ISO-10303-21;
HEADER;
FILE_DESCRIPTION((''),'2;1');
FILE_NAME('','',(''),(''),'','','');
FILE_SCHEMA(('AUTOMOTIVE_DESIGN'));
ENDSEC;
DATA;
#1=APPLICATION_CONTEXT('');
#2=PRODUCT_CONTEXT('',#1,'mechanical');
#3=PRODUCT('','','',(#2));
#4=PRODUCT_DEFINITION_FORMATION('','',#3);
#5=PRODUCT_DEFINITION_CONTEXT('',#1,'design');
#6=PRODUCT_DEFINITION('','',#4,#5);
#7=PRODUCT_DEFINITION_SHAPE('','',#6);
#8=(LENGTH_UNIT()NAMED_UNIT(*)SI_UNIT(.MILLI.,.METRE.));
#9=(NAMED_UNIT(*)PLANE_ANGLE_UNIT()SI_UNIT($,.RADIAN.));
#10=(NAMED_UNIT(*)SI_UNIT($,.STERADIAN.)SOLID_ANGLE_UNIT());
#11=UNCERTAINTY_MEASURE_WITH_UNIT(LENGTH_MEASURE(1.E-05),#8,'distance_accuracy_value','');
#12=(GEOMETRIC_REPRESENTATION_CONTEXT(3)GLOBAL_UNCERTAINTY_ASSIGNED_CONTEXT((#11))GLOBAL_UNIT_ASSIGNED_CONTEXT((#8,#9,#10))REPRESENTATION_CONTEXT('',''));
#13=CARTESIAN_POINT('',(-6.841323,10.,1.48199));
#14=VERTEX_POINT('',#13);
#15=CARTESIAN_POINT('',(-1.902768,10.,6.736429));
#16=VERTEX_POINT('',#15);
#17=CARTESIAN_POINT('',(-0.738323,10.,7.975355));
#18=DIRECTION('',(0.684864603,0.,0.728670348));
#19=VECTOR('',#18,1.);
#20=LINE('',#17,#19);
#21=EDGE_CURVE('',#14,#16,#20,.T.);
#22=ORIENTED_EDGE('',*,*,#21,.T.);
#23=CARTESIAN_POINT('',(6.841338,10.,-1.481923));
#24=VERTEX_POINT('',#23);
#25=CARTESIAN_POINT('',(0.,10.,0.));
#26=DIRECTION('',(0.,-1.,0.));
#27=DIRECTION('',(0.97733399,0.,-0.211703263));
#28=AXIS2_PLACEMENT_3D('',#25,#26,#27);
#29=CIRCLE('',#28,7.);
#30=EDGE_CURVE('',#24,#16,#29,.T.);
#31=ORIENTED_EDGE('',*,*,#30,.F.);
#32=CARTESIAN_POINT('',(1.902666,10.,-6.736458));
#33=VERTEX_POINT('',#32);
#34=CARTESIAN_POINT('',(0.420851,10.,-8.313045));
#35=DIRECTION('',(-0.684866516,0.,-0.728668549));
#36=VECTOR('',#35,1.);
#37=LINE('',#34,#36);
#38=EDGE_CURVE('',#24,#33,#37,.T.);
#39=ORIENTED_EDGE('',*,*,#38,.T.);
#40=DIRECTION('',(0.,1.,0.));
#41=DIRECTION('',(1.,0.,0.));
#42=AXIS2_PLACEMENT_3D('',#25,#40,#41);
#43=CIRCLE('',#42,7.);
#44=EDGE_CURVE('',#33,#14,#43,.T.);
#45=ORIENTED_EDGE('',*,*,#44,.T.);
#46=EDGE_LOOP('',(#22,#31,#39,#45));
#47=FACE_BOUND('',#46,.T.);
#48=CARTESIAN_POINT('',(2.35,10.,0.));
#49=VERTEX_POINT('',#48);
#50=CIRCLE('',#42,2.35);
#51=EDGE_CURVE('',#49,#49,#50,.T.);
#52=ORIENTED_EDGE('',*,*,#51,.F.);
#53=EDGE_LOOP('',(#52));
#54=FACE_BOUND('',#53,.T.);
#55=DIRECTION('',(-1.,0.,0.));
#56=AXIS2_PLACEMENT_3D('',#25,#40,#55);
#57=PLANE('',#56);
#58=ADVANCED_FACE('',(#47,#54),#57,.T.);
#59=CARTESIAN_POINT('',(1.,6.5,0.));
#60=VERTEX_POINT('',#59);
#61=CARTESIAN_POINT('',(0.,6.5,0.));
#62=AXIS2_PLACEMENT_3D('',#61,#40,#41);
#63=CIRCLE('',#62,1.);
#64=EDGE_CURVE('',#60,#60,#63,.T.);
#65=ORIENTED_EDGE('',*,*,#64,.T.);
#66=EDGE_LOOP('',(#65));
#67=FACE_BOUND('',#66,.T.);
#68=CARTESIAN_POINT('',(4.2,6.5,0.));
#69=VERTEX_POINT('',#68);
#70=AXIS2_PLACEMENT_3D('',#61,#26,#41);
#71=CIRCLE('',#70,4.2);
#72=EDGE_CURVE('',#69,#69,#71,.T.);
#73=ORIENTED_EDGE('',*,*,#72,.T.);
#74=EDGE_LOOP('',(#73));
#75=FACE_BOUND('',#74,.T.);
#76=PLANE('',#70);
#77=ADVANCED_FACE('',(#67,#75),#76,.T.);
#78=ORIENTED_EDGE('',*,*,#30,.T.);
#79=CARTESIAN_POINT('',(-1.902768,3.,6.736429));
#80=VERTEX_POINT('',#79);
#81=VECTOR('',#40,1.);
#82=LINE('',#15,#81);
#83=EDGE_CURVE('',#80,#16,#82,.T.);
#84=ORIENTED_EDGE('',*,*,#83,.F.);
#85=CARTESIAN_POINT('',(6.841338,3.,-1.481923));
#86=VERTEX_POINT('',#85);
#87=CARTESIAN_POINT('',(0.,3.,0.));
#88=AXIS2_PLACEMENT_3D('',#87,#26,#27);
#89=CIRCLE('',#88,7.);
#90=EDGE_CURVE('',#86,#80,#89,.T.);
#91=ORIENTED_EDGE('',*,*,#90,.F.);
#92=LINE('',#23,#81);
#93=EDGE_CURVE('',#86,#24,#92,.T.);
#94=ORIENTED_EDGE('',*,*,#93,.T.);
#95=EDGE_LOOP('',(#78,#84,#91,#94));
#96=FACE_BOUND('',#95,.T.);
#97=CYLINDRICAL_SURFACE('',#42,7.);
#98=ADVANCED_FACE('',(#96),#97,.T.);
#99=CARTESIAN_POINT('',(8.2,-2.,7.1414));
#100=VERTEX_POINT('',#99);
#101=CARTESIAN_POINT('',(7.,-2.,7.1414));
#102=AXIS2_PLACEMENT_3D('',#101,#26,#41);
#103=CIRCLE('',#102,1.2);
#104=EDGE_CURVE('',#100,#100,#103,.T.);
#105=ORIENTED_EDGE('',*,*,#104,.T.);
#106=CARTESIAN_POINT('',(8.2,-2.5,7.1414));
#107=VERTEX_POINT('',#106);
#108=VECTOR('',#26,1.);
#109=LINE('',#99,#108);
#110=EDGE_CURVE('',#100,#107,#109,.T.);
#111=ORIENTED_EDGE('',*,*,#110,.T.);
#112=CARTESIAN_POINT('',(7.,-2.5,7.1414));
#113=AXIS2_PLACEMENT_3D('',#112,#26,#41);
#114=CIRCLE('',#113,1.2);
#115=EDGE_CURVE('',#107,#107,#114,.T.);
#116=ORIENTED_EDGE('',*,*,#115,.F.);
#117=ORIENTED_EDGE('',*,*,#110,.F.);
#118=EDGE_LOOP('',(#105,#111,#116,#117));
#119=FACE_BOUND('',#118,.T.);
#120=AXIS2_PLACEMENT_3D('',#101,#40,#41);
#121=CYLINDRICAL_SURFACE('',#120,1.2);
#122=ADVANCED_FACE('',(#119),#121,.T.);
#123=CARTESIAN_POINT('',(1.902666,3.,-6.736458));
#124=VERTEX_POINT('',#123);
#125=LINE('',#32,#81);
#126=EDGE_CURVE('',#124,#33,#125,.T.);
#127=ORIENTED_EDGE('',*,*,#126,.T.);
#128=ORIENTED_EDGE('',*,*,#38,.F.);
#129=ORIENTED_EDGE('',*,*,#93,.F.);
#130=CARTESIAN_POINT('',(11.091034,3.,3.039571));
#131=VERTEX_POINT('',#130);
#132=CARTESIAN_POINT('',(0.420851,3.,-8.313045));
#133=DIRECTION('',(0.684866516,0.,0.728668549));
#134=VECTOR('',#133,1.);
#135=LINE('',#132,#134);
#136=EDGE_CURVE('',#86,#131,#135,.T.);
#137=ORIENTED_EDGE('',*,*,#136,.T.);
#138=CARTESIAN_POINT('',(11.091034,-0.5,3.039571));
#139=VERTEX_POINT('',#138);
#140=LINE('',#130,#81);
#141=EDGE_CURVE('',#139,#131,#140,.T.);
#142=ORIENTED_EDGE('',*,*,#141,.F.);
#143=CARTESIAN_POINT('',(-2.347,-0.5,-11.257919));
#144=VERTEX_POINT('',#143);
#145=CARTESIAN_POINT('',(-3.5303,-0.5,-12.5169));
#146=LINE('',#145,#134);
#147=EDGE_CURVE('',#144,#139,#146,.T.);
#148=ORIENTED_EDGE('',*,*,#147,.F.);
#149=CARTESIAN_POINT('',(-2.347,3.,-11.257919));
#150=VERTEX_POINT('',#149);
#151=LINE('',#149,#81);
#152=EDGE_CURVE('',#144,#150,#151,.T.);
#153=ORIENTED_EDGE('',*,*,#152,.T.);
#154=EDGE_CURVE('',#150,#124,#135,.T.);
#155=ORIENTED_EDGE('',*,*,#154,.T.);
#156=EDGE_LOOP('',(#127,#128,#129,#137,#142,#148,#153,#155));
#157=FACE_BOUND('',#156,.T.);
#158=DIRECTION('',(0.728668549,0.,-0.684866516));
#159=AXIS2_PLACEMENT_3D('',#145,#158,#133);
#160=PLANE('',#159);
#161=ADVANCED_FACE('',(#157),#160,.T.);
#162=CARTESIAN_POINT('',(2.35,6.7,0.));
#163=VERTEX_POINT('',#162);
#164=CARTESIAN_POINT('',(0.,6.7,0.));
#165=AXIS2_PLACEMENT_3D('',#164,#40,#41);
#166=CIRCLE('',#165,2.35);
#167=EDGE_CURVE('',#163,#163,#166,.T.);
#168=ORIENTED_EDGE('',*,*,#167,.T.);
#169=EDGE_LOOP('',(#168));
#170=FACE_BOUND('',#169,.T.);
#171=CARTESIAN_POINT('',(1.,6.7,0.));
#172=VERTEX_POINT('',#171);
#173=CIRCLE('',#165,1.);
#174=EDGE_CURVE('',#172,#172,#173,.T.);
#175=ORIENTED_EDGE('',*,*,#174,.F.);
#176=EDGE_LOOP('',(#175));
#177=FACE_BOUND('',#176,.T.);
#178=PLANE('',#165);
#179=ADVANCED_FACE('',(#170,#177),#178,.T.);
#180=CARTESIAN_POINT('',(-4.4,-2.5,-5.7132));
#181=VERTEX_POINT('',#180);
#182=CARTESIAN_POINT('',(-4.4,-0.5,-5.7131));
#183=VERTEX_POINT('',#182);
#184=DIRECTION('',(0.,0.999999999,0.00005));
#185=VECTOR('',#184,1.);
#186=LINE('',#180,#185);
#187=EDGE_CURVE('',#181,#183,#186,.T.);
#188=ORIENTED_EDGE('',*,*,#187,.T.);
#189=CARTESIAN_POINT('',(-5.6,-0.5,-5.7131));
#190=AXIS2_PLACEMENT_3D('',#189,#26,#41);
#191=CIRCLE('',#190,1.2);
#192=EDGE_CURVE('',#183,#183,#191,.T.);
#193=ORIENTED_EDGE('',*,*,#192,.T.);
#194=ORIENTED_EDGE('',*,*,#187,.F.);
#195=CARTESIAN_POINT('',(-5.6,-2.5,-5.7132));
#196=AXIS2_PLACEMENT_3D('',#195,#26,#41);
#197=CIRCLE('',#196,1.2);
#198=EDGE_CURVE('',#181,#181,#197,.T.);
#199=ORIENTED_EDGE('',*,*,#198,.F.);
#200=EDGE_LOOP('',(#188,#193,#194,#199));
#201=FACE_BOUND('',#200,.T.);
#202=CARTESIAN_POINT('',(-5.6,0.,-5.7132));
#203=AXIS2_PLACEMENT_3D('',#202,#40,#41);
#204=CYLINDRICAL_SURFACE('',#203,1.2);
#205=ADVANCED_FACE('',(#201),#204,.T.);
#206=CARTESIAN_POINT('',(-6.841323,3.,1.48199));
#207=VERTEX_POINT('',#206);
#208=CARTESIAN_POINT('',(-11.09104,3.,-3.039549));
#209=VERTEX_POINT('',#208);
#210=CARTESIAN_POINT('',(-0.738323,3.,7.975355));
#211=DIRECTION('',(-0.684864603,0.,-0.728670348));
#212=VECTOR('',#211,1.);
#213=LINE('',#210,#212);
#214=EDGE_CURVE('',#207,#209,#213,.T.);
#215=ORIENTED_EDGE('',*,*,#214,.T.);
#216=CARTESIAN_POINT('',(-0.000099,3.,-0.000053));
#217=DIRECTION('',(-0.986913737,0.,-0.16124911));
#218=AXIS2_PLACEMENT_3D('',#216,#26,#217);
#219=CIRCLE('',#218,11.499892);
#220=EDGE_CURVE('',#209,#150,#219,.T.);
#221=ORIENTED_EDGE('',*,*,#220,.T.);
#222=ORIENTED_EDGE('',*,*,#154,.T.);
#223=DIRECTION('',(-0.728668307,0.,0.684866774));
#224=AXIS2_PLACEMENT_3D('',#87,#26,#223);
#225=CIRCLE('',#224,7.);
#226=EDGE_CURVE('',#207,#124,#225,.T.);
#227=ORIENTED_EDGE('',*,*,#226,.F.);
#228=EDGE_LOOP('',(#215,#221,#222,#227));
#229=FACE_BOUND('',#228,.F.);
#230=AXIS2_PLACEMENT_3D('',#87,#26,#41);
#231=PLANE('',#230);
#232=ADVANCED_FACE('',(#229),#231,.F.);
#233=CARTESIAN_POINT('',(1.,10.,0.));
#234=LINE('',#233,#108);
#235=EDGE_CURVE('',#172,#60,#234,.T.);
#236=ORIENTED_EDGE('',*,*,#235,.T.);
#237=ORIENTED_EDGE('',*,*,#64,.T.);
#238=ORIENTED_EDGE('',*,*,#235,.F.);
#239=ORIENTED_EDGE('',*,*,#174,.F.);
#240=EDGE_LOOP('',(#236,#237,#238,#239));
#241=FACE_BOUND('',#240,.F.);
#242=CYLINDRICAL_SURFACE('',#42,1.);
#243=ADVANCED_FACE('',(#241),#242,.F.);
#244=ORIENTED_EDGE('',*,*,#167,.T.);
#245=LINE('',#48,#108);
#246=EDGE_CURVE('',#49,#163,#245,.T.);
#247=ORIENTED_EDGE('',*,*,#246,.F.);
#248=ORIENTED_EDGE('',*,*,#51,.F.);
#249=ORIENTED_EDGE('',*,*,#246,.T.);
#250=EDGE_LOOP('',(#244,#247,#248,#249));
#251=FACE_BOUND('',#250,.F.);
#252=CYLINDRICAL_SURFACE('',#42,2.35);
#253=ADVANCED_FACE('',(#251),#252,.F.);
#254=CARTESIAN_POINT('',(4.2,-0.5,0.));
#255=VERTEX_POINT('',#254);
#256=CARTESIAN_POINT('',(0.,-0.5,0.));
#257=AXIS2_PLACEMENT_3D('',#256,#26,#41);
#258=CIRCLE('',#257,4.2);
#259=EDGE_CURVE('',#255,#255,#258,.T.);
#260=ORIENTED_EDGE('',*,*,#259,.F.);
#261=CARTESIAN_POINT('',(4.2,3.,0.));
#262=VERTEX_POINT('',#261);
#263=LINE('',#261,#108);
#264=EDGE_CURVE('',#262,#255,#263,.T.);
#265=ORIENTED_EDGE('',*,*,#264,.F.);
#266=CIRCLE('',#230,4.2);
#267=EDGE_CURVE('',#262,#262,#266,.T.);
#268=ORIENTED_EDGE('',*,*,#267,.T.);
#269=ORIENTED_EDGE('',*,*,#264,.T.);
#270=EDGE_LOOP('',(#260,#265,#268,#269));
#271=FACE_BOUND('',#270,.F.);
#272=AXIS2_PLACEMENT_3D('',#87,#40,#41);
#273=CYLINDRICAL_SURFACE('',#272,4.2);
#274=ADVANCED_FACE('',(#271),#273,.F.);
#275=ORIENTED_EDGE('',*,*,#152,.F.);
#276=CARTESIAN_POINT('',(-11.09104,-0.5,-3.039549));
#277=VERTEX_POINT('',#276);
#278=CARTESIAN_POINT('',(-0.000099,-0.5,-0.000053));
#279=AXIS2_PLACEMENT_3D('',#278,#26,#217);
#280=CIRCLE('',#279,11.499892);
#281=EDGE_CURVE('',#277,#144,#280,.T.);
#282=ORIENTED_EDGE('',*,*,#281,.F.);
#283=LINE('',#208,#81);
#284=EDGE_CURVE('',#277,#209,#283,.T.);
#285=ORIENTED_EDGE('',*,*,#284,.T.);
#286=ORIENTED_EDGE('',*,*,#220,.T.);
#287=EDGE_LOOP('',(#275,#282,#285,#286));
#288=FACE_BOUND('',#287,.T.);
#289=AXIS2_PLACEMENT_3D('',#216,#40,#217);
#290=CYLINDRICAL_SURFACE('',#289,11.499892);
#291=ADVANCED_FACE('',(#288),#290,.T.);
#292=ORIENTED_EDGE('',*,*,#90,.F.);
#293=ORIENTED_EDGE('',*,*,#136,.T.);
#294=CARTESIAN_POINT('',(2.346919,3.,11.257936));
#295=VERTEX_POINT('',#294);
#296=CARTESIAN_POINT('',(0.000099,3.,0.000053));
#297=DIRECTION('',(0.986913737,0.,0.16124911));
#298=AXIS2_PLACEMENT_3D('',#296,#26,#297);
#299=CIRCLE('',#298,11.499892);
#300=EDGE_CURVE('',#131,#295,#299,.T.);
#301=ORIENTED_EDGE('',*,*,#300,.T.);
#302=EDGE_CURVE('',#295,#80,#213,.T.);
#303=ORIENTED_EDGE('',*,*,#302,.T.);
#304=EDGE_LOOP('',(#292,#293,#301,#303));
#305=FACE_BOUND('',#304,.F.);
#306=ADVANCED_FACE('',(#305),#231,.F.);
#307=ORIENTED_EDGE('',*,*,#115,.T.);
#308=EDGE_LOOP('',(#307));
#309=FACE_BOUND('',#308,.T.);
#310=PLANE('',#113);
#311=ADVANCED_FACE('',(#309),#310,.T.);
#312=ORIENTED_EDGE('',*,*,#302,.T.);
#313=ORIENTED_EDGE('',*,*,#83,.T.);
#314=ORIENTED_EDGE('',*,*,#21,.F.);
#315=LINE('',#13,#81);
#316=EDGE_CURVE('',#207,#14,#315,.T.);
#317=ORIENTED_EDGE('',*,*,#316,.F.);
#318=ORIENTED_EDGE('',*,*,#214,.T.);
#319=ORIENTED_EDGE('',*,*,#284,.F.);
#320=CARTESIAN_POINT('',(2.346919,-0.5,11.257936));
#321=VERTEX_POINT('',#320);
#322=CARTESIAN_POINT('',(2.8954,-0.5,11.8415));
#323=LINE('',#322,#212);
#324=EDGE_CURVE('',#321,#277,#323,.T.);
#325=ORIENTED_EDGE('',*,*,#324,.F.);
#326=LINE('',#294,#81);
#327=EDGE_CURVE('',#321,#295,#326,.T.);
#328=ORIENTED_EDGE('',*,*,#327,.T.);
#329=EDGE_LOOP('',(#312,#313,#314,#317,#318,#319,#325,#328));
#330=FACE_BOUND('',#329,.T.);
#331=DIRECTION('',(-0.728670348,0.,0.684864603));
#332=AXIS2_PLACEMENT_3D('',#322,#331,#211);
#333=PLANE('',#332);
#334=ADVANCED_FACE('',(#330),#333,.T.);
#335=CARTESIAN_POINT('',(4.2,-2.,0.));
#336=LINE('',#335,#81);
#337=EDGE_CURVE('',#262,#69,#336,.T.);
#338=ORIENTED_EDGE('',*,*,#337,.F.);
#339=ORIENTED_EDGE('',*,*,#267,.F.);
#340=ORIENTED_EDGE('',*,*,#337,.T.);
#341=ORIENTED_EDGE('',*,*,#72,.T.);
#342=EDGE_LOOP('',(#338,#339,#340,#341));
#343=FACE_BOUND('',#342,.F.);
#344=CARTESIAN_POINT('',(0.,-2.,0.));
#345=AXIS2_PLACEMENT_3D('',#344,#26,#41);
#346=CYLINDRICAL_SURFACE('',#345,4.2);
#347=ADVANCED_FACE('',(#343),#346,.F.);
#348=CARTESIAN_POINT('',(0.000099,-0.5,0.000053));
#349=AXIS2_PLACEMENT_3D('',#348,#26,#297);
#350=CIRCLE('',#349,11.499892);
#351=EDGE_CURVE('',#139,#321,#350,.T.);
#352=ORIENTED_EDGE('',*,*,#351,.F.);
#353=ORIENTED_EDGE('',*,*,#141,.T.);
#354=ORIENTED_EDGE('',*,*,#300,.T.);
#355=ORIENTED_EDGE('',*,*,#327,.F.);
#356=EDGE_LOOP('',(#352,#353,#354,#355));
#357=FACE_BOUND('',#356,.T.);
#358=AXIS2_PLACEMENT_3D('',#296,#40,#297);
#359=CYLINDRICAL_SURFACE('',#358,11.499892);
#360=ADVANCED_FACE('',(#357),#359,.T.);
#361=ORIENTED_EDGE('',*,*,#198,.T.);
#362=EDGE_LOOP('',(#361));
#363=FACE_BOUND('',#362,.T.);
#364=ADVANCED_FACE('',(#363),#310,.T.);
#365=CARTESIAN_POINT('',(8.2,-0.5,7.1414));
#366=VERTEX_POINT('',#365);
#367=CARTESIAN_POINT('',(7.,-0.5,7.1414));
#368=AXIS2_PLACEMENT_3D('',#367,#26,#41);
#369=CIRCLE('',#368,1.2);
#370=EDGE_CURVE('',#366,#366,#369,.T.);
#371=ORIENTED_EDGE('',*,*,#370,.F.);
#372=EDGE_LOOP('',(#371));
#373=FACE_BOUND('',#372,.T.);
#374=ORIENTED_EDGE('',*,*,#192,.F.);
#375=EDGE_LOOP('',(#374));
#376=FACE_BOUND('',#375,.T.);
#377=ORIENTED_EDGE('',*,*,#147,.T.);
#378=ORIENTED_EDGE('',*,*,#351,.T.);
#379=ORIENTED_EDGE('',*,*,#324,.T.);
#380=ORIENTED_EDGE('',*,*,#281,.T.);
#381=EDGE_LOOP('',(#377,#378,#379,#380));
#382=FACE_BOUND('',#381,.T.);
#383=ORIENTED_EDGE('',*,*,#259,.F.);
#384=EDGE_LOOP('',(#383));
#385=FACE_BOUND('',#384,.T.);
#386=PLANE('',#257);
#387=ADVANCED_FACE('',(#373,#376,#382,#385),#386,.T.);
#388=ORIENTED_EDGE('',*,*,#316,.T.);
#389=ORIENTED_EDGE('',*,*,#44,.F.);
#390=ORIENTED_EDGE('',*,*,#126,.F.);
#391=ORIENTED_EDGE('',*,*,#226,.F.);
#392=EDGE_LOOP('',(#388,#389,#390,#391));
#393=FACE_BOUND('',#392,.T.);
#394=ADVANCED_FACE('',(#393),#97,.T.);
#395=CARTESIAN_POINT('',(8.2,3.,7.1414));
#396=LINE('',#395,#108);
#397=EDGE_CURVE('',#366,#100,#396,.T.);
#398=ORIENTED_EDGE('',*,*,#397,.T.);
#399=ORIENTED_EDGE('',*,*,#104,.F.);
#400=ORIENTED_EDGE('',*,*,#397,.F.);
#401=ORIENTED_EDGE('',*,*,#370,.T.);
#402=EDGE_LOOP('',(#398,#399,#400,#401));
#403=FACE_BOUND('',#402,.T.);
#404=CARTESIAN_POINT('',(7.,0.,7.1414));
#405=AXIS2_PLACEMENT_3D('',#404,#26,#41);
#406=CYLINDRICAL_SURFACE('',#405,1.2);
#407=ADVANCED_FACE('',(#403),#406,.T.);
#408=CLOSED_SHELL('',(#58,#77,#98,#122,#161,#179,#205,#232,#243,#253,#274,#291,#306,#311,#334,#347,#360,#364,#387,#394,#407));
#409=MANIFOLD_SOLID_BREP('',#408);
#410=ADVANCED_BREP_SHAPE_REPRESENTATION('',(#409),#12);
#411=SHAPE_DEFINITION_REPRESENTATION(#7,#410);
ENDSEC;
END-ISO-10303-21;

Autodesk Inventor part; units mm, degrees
ref_plane "YZ Plane" through (0, 0, 0) normal (1, 0, 0) x (0, 1, 0)
ref_plane "XZ Plane" through (0, 0, 0) normal (0, 1, 0) x (-1, 0, 0)
ref_plane "XY Plane" through (0, 0, 0) normal (0, 0, 1) x (1, 0, 0)
sketch "Skizze1" plane through (0, 0, 0) normal (0, 1, 0) x (-1, 0, 0)
  circle A0 centre (0, 0) radius 15
  dimension "d0" = 30
extrude "Extrusion1" add sketch "Skizze1" along normal blind 10
sketch "Skizze2" plane through (0, 0, 0) normal (0, -1, 0) x (1, 0, 0)
  line L0 (14.3188, 0.9) -> (12.9688, 0.9)
  line L1 (12.9688, -0.9) -> (14.3188, -0.9)
  line L2 (14.3188, -0.9) -> (14.3188, 0.9)
  line L3 (-21.3175, 0) -> (21.3175, 0) projected
  arc A0 (12.9688, 0.9) -> (0.9, 12.9688) centre (0, 0) ccw
  line L4 (-0.9, -12.9688) -> (-0.9, -14.3188)
  line L5 (-0.9, -14.3188) -> (0.9, -14.3188)
  line L6 (0.9, -14.3188) -> (0.9, -12.9688)
  line L7 (-12.9688, 0.9) -> (-14.3188, 0.9)
  line L8 (-14.3188, 0.9) -> (-14.3188, -0.9)
  line L9 (-14.3188, -0.9) -> (-12.9688, -0.9)
  line L10 (-0.9, 12.9688) -> (-0.9, 14.3188)
  line L11 (-0.9, 14.3188) -> (0.9, 14.3188)
  line L12 (0.9, 14.3188) -> (0.9, 12.9688)
  line L13 (0, -21.3175) -> (0, 21.3175) projected
  line L14 (-21.3175, 0) -> (21.3175, 0) projected
  arc A1 (0.9, -12.9688) -> (12.9688, -0.9) centre (0, 0) ccw
  arc A2 (-12.9688, -0.9) -> (-0.9, -12.9688) centre (0, 0) ccw
  arc A3 (-0.9, 12.9688) -> (-12.9688, 0.9) centre (0, 0) ccw
  circle A4 centre (0, 0) radius 4.2
  circle A5 centre (7, 7.1414) radius 1.2
  circle A6 centre (-5.6, -5.7131) radius 1.2
  dimension "d4" = 0.9
  dimension "d5" = 0.9
  dimension "d8" = 1.35
  dimension "d9" = 1.35
  dimension "d10" = 1.8
  dimension "d11" = 0.9
  dimension "d12" = 1.35
  dimension "d13" = 1.8
  dimension "d14" = 0.9
  dimension "d15" = 0.9
  dimension "d16" = 1.35
  dimension "d17" = 8.4
  dimension "d18" = 2.4
  dimension "d19" = 2.4
  dimension "d20" = 8
  dimension "d21" = 10
  dimension "d22" = 7
  dimension "d23" = 5.6
  dimension "d50" = 13
  dimension "d51" = 13
  dimension "d52" = 1.35
  dimension "d53" = 1.35
  dimension "d54" = 1.35
extrude "Extrusion2" cut sketch "Skizze2" against normal blind 3 contours L2 L3 A4 L13 L11 L12 A0 L0 | L2 L1 A1 L6 L5 L13 A4 L3 | A4 L3 L8 L7 A3 L10 L11 L13 | L13 L5 L4 A2 L9 L8 L3 A4
sketch "Skizze4" plane through (7, 0, 7.1414) normal (0, -1, 0) x (1, 0, 0)
  circle A0 centre (-7, -7.1414) radius 4.2
  circle A1 centre (-12.6, -12.8546) radius 1.2
  circle A2 centre (0, 0) radius 1.2
  line L0 (-7, -28.1414) -> (-7, 13.8586) projected
  dimension "d26" = 2.4
  dimension "d27" = 5.6
  dimension "d28" = 8
  dimension "d44" = 8.4
  dimension "d45" = 2.4
extrude "Extrusion3" add sketch "Skizze4" along normal blind 2
sketch "Skizze5" plane through (0, 10, 0) normal (0, 1, 0) x (1, 0, 0)
  circle A0 centre (0, 0) radius 19.262
  circle A1 centre (0, 0) radius 7
  dimension "d31" = 14
extrude "Extrusion4" cut sketch "Skizze5" against normal blind 7
fillet "Rundung1" radius 1 8 edges at (12.9688, 1.5, -0.9) (12.9688, 1.5, 0.9) (0.9, 1.5, -12.9688) (-0.9, 1.5, -12.9688) (-12.9688, 1.5, -0.9) (-12.9688, 1.5, 0.9) (-0.9, 1.5, 12.9688) (0.9, 1.5, 12.9688)
sketch "Skizze8" plane through (0, 10, 0) normal (0, 1, 0) x (1, 0, 0)
  circle A0 centre (0, 0) radius 1
  dimension "d46" = 2
extrude "Extrusion7" cut sketch "Skizze8" against normal blind 7
sketch "Skizze9" plane through (0, -2, 0) normal (0, -1, 0) x (1, 0, 0)
  line L0 (18.2687, 9.2162) -> (-7.478, -18.1772)
  line L1 (-7.478, -18.1772) -> (18.2687, -18.1772)
  line L2 (18.2687, -18.1772) -> (18.2687, 9.2162)
  line L3 (8.0673, 18.8043) -> (-17.6793, -8.5891)
  line L4 (-17.6793, -8.5891) -> (-17.6793, 18.8043)
  line L5 (-17.6793, 18.8043) -> (8.0673, 18.8043)
  point P0 (0, 0)
  dimension "d55" = 7
  dimension "d56" = 7
extrude "Extrusion8" cut sketch "Skizze9" against normal blind 50
sketch "Skizze10" plane through (0, -2, 0) normal (0, -1, 0) x (1, 0, 0)
  circle A0 centre (0, 0) radius 11.5
  circle A1 centre (0, 0) radius 18.9246
  dimension "d61" = 23
extrude "Extrusion9" cut sketch "Skizze10" against normal blind 10
sketch "Skizze11" plane through (0, -2, 0) normal (0, -1, 0) x (1, 0, 0)
  circle A0 centre (0, 0) radius 1 projected
  circle A1 centre (0, 0) radius 4.2
extrude "Extrusion10" cut sketch "Skizze11" against normal blind 8.5 contours A0 | A1
sketch "Skizze13" plane through (0, 3, 0) normal (0, -1, 0) x (1, 0, 0)
  circle A0 centre (7, 7.1414) radius 1.2 projected
  circle A1 centre (7, 7.1414) radius 1.2
  circle A2 centre (-5.6, -5.7131) radius 1.2 projected
  circle A3 centre (-5.6, -5.7131) radius 1.2
  arc A4 (11.3495, 1.8544) -> (1.1481, 11.4425) centre (0, 0) ccw
  line L0 (11.3495, 1.8544) -> (8.9749, -0.6721) projected
  line L1 (11.3495, 1.8544) -> (-1.1481, -11.4425)
  line L2 (1.1481, 11.4425) -> (-11.3495, -1.8544)
  line L3 (1.2265, -8.916) -> (-1.1481, -11.4425) projected
  arc A5 (-11.3495, -1.8544) -> (-1.1481, -11.4425) centre (0, 0) ccw
  circle A6 centre (0, 0) radius 4.2
extrude "Extrusion11" add sketch "Skizze13" along normal blind 3.5
sketch "Skizze14" plane through (7, -2, 7.1414) normal (0, -1, 0) x (1, 0, 0)
  circle A0 centre (0, 0) radius 1.2 projected
  circle A1 centre (0, 0) radius 1.2
  circle A2 centre (-12.6, -12.8546) radius 1.2 projected
  circle A3 centre (-12.6, -12.8546) radius 1.2
  point P0 (-7, -7.1414)
extrude "Extrusion12" add sketch "Skizze14" along normal blind 0.5
sketch "Skizze15" plane through (0, 10, 0) normal (0, 1, 0) x (1, 0, 0)
  circle A0 centre (0, 0) radius 1 projected
  circle A1 centre (0, 0) radius 2.35
  dimension "d68" = 4.7
extrude "Extrusion13" cut sketch "Skizze15" against normal blind 3.3 contours A0 | A1
sketch "Skizze17" plane through (0, -0.5, 0) normal (0, -1, 0) x (1, 0, 0)
  line L0 (2.8954, 11.8415) -> (-13.3125, -5.4031)
  line L1 (1.1481, 11.4425) -> (-5.1007, 4.7941) projected
  line L2 (-13.3125, -5.4031) -> (-13.3125, 19.7684)
  line L3 (-13.3125, 19.7684) -> (2.8954, 11.8415)
  line L4 (-3.5303, -12.5169) -> (12.8557, 4.9171)
  line L5 (-1.1481, -11.4425) -> (5.1007, -4.7941) projected
  line L6 (12.8557, 4.9171) -> (12.8557, -12.5169)
  line L7 (12.8557, -12.5169) -> (-3.5303, -12.5169)
  point P0 (0, 0)
  dimension "d71" = 1
  dimension "d72" = 1
extrude "Extrusion14" cut sketch "Skizze17" against normal blind 15
properties part number "Adaptation_on_OPdevside_4_3"
